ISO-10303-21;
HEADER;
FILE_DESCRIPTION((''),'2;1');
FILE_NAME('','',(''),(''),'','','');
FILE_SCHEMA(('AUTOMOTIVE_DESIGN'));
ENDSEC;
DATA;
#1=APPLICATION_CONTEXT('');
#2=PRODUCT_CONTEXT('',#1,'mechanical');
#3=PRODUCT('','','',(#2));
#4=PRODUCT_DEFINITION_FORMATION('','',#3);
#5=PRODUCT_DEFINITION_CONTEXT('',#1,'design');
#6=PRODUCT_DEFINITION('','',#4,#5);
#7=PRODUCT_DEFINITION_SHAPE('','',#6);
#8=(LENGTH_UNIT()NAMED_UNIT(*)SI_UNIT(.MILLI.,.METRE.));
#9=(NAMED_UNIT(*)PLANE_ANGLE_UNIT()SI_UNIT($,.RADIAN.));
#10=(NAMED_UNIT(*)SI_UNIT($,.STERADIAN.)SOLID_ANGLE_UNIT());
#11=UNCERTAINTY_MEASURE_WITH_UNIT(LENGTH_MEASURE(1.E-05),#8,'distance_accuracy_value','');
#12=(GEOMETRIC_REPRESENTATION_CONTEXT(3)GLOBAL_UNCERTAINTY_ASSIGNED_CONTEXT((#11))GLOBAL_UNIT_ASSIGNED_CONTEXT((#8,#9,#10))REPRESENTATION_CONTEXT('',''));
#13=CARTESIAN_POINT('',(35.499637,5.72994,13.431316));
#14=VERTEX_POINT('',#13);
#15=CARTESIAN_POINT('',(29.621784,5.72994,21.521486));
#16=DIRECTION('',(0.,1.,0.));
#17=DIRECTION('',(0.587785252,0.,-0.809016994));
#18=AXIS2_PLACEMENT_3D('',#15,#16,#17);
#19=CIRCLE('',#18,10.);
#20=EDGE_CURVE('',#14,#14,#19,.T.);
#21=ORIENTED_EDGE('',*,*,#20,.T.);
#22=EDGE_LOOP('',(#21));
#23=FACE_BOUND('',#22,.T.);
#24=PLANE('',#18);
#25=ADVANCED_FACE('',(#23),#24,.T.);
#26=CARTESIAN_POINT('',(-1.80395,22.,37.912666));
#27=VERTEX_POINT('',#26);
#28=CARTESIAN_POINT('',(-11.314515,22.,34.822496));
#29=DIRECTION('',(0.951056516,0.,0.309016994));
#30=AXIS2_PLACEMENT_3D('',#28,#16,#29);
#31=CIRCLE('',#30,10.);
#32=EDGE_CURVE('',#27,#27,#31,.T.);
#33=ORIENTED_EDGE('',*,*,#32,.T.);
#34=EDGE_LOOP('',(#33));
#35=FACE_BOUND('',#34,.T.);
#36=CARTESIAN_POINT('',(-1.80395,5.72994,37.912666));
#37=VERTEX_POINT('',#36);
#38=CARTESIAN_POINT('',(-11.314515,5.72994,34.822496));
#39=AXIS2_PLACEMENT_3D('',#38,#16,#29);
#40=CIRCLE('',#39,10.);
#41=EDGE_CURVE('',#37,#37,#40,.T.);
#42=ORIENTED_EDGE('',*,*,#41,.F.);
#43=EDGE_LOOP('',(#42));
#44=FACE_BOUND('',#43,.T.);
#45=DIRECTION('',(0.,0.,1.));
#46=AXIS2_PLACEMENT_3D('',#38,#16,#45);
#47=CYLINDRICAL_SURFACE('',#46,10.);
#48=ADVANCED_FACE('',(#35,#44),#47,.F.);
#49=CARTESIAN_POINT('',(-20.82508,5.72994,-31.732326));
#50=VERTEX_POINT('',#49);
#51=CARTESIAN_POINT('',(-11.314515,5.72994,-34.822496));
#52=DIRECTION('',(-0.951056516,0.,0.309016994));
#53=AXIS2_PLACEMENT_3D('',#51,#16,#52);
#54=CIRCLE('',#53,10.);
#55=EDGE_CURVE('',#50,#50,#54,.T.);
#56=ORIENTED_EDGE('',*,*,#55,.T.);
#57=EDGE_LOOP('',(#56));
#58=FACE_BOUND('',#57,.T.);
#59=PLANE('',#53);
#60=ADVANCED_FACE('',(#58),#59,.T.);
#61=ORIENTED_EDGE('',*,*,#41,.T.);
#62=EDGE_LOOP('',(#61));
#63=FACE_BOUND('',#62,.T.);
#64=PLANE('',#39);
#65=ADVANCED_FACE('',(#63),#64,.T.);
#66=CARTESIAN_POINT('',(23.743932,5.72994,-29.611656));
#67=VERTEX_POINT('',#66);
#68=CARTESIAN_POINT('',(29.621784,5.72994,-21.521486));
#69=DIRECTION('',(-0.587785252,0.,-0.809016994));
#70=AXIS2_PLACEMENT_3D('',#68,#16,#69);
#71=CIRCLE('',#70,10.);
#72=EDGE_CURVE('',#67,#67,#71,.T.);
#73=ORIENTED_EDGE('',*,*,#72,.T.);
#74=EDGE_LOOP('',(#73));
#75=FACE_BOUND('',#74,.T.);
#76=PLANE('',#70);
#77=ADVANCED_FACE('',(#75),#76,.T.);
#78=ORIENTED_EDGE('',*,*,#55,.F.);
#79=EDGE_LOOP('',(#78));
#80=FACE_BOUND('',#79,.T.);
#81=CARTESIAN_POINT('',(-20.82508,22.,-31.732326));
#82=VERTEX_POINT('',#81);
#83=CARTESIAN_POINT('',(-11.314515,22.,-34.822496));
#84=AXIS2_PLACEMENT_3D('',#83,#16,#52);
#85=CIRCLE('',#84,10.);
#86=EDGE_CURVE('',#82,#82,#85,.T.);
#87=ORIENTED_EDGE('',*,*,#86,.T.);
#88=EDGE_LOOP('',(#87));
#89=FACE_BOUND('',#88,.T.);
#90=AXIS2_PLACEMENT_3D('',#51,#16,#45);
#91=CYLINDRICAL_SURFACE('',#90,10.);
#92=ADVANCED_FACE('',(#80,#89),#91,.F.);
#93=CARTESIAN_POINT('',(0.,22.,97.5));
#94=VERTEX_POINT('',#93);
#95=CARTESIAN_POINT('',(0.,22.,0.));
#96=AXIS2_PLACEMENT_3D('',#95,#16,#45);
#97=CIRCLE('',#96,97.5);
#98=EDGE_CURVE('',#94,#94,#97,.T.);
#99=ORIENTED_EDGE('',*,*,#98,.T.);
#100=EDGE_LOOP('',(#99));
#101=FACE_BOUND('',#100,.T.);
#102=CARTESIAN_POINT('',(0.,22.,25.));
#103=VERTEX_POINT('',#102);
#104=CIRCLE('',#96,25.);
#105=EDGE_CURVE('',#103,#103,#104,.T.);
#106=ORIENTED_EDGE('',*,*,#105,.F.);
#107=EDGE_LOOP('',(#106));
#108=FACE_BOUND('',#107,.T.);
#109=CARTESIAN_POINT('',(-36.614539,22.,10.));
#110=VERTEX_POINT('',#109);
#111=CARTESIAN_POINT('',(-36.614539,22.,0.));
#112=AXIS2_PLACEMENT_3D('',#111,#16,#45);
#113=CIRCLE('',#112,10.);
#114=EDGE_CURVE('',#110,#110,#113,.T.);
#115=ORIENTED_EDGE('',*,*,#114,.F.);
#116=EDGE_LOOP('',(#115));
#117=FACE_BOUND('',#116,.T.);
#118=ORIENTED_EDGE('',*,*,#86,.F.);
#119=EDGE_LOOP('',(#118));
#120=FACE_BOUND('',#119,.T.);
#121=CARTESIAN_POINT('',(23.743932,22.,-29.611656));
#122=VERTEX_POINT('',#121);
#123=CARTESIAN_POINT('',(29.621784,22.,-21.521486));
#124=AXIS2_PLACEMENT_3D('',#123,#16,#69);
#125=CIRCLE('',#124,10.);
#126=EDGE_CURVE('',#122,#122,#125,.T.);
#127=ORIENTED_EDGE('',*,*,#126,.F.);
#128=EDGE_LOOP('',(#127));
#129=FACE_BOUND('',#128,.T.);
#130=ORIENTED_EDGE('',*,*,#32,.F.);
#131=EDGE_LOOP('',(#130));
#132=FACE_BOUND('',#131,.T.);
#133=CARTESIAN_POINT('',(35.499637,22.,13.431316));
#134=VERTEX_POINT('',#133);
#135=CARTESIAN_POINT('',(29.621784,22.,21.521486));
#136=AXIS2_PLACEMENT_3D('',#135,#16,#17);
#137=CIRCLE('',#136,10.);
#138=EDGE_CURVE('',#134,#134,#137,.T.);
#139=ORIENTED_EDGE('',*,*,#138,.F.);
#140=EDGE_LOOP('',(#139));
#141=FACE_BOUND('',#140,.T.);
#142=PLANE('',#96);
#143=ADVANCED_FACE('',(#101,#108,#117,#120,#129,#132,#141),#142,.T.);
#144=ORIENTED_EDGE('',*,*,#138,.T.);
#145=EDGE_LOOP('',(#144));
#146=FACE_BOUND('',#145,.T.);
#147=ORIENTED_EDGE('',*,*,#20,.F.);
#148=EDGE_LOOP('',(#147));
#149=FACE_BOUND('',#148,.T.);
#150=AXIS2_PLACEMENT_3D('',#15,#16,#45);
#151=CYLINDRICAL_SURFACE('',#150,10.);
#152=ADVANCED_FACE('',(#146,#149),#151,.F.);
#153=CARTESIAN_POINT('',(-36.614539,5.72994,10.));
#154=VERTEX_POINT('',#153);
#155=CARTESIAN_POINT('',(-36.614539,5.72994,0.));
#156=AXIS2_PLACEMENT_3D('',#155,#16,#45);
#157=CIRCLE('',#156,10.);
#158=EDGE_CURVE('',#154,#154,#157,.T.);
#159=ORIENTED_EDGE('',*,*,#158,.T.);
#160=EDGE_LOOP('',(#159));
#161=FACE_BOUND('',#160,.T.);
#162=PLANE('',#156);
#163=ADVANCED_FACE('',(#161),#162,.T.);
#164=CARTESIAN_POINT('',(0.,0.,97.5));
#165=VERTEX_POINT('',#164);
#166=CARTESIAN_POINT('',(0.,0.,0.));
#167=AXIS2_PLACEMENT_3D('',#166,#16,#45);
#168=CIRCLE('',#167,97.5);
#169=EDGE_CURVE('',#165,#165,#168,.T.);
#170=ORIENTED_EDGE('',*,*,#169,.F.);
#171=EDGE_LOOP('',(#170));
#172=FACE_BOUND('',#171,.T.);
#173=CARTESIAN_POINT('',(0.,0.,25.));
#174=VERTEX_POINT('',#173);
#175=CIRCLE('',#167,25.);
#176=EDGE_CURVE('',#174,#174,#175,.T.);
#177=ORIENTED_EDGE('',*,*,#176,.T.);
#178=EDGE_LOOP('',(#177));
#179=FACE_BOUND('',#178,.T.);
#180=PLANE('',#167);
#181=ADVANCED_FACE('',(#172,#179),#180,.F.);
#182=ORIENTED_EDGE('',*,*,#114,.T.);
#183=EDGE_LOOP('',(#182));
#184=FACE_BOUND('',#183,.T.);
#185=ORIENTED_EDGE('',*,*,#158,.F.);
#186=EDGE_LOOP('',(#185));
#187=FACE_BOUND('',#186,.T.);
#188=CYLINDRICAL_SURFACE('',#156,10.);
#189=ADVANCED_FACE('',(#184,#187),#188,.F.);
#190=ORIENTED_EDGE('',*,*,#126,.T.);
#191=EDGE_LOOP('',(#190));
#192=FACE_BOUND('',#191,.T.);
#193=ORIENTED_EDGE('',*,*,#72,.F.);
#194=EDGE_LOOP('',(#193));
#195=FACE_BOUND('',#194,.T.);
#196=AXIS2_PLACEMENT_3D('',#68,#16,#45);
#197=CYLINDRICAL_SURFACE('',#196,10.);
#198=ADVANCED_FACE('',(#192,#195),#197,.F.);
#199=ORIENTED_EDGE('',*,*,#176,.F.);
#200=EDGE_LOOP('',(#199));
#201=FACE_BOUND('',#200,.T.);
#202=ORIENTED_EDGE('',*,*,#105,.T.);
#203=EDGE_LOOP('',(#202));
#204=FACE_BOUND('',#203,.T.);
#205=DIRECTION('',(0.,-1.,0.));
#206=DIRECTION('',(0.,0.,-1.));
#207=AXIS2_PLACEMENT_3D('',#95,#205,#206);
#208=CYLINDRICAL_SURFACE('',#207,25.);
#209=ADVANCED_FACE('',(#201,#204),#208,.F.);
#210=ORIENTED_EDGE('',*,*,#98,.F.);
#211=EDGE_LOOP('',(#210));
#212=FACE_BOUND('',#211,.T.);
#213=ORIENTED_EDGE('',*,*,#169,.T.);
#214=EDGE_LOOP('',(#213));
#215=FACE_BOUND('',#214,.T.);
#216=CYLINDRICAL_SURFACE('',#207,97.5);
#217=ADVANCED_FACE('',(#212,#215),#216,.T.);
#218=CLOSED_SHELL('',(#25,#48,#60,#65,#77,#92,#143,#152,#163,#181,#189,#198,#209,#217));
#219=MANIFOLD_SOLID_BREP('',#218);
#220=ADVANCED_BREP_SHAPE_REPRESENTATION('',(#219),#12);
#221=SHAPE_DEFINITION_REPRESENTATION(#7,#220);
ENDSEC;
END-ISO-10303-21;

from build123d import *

# Parameters (mm, degrees)
SKETCH1_R           = 97.5
BOSS_EXTRUDE1_DEPTH = 22
SKETCH2_R           = 25
CUT_EXTRUDE1_DEPTH  = 140.629867865
SKETCH3_R           = 10
CUT_EXTRUDE2_DEPTH  = 16.270060169
CIRPATTERN1_COUNT   = 5


with BuildPart() as part:
    # Sketch1 → Boss-Extrude1 (new body)
    with BuildSketch(Plane(origin=(0, 0, 0), x_dir=(1, 0, 0), z_dir=(0, 1, 0))):
        Circle(SKETCH1_R)
    extrude(amount=BOSS_EXTRUDE1_DEPTH)

    # Sketch2 → Cut-Extrude1 (cut, through all)
    with BuildSketch(Plane(origin=(0, 0, 0), x_dir=(1, 0, 0), z_dir=(0, 1, 0))):
        Circle(SKETCH2_R)
    extrude(amount=CUT_EXTRUDE1_DEPTH, mode=Mode.SUBTRACT)

    # Sketch3 → Cut-Extrude2 (cut)
    with BuildSketch(Plane(origin=(0, 22, 0), x_dir=(1, 0, 0), z_dir=(0, 1, 0))):
        with Locations((-36.61453896, 0)):
            Circle(SKETCH3_R)
    cut_extrude2 = extrude(amount=-CUT_EXTRUDE2_DEPTH, mode=Mode.SUBTRACT)

    # CirPattern1: Cut-Extrude2 ×5 about axis
    cirpattern1_axis = Axis((0, 0, 0), (0, 1, 0))
    for i in range(1, CIRPATTERN1_COUNT):
        add(cut_extrude2.rotate(cirpattern1_axis, i * 360 / CIRPATTERN1_COUNT), mode=Mode.SUBTRACT)


solid = part.part
